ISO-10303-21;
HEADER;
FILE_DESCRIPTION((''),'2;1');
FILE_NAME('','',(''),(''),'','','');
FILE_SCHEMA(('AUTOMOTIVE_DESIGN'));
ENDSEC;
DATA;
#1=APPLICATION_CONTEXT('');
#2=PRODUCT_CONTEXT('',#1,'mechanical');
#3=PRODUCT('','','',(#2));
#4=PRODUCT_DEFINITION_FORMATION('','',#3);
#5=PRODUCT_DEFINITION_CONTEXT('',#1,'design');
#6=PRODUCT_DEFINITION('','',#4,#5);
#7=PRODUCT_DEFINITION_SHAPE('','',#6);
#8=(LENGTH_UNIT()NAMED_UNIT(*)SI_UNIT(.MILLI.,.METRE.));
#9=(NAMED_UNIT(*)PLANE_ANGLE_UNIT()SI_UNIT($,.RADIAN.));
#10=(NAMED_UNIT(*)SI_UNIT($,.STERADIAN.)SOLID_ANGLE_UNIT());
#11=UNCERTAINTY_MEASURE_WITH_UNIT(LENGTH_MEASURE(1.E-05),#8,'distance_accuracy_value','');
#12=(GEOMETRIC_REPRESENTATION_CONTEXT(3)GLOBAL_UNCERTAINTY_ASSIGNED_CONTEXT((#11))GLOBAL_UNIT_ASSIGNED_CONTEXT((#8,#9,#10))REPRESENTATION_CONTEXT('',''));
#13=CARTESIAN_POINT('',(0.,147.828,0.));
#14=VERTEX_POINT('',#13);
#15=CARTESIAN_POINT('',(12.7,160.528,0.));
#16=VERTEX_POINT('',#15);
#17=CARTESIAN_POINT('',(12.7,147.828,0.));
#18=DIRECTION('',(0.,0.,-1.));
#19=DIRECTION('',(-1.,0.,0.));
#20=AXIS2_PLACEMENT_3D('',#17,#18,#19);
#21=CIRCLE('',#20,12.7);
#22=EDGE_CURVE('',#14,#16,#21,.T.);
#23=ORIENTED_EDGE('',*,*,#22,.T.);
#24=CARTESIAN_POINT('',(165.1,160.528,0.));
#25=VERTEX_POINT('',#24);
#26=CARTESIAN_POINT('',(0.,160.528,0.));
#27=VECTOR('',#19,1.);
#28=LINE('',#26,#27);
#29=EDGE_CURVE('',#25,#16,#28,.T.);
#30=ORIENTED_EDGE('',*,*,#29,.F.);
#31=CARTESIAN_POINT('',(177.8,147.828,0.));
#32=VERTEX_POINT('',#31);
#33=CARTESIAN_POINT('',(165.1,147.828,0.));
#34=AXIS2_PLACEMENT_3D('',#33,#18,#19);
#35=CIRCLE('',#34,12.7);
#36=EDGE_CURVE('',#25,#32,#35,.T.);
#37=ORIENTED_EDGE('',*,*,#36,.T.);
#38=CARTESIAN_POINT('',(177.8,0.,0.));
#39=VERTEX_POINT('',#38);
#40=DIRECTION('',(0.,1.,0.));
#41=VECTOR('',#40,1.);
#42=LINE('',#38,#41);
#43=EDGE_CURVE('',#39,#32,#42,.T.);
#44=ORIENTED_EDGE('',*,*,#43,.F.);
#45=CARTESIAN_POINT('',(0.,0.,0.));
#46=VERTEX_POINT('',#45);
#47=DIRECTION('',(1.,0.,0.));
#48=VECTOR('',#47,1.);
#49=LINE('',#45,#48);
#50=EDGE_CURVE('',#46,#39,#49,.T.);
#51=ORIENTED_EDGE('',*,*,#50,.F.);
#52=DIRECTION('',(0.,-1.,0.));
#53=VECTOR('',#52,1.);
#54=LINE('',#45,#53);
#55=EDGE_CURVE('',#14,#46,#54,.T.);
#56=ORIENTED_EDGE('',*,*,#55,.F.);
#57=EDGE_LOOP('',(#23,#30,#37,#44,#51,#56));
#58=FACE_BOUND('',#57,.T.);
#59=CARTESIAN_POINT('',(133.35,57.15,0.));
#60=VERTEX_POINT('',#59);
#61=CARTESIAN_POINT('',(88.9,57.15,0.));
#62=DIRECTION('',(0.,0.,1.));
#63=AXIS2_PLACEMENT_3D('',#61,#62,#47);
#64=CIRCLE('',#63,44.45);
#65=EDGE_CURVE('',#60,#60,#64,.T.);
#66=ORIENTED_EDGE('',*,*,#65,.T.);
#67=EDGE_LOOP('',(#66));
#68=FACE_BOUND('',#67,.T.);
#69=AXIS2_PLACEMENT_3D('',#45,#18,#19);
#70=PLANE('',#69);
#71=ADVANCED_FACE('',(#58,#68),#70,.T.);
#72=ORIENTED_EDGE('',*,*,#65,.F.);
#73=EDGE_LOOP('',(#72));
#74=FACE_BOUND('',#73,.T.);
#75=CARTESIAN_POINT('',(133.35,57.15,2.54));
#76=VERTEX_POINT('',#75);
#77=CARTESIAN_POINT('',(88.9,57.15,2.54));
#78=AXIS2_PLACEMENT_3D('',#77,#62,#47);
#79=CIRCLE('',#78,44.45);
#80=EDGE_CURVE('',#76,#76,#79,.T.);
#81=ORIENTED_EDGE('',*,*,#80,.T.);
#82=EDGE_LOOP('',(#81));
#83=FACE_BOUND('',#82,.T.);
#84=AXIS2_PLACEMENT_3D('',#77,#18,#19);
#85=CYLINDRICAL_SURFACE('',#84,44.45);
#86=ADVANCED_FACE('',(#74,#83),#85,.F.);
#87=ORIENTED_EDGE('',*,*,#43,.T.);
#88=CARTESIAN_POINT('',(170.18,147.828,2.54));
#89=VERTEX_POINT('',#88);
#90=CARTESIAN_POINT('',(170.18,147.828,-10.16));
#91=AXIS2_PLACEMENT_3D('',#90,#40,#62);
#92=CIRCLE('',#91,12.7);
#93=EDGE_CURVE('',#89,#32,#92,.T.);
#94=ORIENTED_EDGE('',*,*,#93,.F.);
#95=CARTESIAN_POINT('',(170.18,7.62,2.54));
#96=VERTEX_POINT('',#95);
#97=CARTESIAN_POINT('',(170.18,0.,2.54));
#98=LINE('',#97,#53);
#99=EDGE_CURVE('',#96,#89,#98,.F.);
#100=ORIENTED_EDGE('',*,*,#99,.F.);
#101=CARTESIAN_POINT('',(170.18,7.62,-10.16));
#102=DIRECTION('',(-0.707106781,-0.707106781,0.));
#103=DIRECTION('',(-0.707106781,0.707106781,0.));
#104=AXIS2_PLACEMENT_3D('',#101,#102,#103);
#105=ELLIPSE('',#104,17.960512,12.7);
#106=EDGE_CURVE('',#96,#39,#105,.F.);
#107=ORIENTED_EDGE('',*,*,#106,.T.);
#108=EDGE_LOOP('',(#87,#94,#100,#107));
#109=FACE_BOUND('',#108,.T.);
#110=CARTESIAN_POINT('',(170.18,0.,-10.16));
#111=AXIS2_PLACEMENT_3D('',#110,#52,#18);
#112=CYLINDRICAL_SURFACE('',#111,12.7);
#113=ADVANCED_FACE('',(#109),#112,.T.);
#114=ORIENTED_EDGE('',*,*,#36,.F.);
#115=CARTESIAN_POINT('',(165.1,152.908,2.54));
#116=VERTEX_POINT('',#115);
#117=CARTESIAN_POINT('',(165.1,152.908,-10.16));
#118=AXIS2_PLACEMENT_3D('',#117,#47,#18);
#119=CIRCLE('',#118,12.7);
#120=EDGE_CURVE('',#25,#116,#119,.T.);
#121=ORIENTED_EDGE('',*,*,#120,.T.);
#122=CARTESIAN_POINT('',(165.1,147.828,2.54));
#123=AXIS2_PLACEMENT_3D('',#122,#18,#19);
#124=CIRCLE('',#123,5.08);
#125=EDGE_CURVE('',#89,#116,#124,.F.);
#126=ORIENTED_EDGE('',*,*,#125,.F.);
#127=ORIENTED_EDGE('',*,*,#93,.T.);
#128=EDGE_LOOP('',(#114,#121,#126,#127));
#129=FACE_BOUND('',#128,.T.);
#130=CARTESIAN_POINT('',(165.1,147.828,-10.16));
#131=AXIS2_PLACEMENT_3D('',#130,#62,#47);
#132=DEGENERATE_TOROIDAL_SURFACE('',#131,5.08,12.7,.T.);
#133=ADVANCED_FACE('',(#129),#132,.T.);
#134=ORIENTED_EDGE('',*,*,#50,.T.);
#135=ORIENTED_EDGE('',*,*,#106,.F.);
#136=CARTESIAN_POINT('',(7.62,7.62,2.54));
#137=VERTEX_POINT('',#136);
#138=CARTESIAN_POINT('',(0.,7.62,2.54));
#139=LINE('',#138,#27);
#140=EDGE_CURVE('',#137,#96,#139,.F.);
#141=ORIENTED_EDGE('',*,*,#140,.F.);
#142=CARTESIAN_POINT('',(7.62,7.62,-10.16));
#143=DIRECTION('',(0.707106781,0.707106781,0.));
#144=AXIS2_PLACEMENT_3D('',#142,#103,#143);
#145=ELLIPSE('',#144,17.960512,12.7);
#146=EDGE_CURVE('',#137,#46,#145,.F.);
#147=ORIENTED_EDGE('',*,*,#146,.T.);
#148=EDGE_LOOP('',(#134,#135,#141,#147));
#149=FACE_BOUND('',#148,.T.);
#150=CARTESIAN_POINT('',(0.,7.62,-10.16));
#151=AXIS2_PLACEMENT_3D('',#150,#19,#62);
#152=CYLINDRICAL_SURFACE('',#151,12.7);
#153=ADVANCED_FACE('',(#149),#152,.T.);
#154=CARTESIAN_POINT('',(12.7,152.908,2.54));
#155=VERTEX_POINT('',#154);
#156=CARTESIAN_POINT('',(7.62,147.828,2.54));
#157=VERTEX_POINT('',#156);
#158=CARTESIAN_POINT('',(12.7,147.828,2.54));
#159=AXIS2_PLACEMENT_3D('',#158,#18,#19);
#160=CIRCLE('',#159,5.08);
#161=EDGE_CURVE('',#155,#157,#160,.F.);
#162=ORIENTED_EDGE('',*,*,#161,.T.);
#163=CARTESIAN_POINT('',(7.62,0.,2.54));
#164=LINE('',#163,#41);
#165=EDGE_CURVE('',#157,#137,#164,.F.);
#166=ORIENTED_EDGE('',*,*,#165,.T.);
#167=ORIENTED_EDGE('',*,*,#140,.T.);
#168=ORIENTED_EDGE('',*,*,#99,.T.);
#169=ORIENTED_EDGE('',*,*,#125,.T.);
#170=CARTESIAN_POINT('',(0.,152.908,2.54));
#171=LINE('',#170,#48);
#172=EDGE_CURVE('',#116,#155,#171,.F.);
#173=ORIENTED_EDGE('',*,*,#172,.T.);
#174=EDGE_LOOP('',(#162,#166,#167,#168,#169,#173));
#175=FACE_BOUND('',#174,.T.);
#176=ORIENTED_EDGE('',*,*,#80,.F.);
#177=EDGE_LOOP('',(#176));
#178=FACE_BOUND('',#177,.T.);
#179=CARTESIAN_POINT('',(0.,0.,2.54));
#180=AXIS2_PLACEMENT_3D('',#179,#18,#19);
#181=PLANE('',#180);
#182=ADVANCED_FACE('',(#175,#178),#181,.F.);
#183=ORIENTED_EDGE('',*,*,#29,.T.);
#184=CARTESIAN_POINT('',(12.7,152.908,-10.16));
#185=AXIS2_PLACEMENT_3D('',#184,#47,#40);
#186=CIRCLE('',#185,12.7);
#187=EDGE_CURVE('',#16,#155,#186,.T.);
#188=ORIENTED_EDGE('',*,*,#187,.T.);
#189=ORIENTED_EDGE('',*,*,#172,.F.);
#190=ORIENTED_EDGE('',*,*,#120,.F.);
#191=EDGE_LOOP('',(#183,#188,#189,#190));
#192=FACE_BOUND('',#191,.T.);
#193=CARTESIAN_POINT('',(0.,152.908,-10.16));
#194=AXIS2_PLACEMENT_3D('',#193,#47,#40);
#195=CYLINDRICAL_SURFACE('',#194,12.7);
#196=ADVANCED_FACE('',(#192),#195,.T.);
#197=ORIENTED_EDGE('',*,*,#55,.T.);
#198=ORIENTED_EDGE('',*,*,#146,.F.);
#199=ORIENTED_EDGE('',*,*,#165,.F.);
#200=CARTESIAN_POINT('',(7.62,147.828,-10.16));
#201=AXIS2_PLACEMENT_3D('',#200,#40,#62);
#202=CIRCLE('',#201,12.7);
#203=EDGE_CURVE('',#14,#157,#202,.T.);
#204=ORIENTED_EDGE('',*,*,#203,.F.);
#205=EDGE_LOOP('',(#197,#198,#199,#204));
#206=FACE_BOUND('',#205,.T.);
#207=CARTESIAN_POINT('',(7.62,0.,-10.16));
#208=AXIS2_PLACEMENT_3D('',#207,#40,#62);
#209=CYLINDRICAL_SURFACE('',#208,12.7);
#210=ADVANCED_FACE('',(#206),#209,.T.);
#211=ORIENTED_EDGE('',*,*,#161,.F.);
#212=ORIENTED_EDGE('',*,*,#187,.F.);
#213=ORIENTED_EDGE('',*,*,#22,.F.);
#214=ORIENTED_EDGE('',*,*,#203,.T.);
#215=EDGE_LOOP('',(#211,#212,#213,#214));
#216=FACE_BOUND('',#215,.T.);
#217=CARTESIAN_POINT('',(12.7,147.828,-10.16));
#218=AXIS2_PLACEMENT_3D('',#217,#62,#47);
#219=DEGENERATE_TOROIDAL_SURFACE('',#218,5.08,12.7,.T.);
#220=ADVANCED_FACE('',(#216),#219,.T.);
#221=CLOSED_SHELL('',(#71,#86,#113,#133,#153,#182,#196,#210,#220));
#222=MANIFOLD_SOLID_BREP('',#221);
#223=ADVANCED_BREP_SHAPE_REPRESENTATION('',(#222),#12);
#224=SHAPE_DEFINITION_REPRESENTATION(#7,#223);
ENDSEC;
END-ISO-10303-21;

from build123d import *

# Parameters (mm, degrees)
SKETCH1_W           = 177.8
SKETCH1_H           = 160.528
SKETCH1_R           = 44.45
BOSS_EXTRUDE1_DEPTH = 2.54
FILLET1_R           = 12.7
FILLET2_R           = 12.7


with BuildPart() as part:
    # Sketch1 → Boss-Extrude1 (new body)
    with BuildSketch(Plane.XY):
        with Locations((88.9, 80.264)):
            Rectangle(SKETCH1_W, SKETCH1_H)
        with Locations((88.9, 57.15)):
            Circle(SKETCH1_R, mode=Mode.SUBTRACT)
    extrude(amount=BOSS_EXTRUDE1_DEPTH)

    # Fillet1
    fillet1_edges = [part.edges().sort_by_distance(p)[0] for p in [
        (0, 160.528, 1.27),
        (177.8, 160.528, 1.27),
    ]]
    fillet(fillet1_edges, radius=FILLET1_R)

    # Fillet2
    # the kernel refuses this fillet: 12.7 mm, written as the material it takes off along each edge
    with BuildSketch(Plane(origin=(177.8, -19.05, 2.54), x_dir=(0, 0, -1), z_dir=(0, 1, 0))) as fillet2_piece_1:
        with BuildLine():
            CenterArc((12.7, 7.62), FILLET2_R, 180, 36.869897646)
            Line((0, 7.62), (-0.254, 7.62))
            Line((-0.254, 7.62), (-0.254, 0))
            Line((-0.254, 0), (0, -0.254))
            ThreePointArc((0, -0.254), (1.27, -0.254), (2.3368, -0.1524))
            Line((2.3368, -0.1524), (2.54, 0))
        make_face()
    extrude(amount=166.878, mode=Mode.SUBTRACT)
    with BuildSketch(Plane(origin=(165.1, 147.828, 2.54), x_dir=(1, 0, 0), z_dir=(0, -1, 0))) as fillet2_piece_2:
        with BuildLine():
            CenterArc((5.08, -12.7), FILLET2_R, 53.130102354, 36.869897646)
            Line((5.08, 0), (5.08, 0.254))
            Line((5.08, 0.254), (12.7, 0.254))
            Line((12.7, 0.254), (12.954, 0))
            ThreePointArc((12.954, 0), (12.954, -1.27), (12.8524, -2.3368))
            Line((12.8524, -2.3368), (12.7, -2.54))
        make_face()
    revolve(axis=Axis((165.1, 147.828, 2.54), (0, 0, 1)), revolution_arc=90, mode=Mode.SUBTRACT)
    with BuildSketch(Plane(origin=(165.1, 160.528, 2.54), x_dir=(0, -1, 0), z_dir=(-1, 0, 0))) as fillet2_piece_3:
        with BuildLine():
            CenterArc((7.62, -12.7), FILLET2_R, 90, 36.869897646)
            Line((0, -2.54), (-0.1524, -2.3368))
            ThreePointArc((-0.1524, -2.3368), (-0.254, -1.27), (-0.254, 0))
            Line((-0.254, 0), (0, 0.254))
            Line((0, 0.254), (7.62, 0.254))
            Line((7.62, 0.254), (7.62, 0))
        make_face()
    extrude(amount=152.4, mode=Mode.SUBTRACT)
    with BuildSketch(Plane(origin=(12.7, 147.828, 2.54), x_dir=(0, 1, 0), z_dir=(1, 0, 0))) as fillet2_piece_4:
        with BuildLine():
            CenterArc((5.08, -12.7), FILLET2_R, 53.130102354, 36.869897646)
            Line((12.7, -2.54), (12.8524, -2.3368))
            ThreePointArc((12.8524, -2.3368), (12.954, -1.27), (12.954, 0))
            Line((12.954, 0), (12.7, 0.254))
            Line((12.7, 0.254), (5.08, 0.254))
            Line((5.08, 0.254), (5.08, 0))
        make_face()
    revolve(axis=Axis((12.7, 147.828, 2.54), (0, 0, 1)), revolution_arc=90, mode=Mode.SUBTRACT)
    with BuildSketch(Plane(origin=(0, 147.828, 2.54), x_dir=(1, 0, 0), z_dir=(0, -1, 0))) as fillet2_piece_5:
        with BuildLine():
            CenterArc((7.62, -12.7), FILLET2_R, 90, 36.869897646)
            Line((0, -2.54), (-0.1524, -2.3368))
            ThreePointArc((-0.1524, -2.3368), (-0.254, -1.27), (-0.254, 0))
            Line((-0.254, 0), (0, 0.254))
            Line((0, 0.254), (7.62, 0.254))
            Line((7.62, 0.254), (7.62, 0))
        make_face()
    extrude(amount=166.878, mode=Mode.SUBTRACT)
    with BuildSketch(Plane(origin=(-19.05, 0, 2.54), x_dir=(0, 0, -1), z_dir=(1, 0, 0))) as fillet2_piece_6:
        with BuildLine():
            CenterArc((12.7, 7.62), FILLET2_R, 180, 36.869897646)
            Line((0, 7.62), (-0.254, 7.62))
            Line((-0.254, 7.62), (-0.254, 0))
            Line((-0.254, 0), (0, -0.254))
            ThreePointArc((0, -0.254), (1.27, -0.254), (2.3368, -0.1524))
            Line((2.3368, -0.1524), (2.54, 0))
        make_face()
    extrude(amount=215.9, mode=Mode.SUBTRACT)


solid = part.part
